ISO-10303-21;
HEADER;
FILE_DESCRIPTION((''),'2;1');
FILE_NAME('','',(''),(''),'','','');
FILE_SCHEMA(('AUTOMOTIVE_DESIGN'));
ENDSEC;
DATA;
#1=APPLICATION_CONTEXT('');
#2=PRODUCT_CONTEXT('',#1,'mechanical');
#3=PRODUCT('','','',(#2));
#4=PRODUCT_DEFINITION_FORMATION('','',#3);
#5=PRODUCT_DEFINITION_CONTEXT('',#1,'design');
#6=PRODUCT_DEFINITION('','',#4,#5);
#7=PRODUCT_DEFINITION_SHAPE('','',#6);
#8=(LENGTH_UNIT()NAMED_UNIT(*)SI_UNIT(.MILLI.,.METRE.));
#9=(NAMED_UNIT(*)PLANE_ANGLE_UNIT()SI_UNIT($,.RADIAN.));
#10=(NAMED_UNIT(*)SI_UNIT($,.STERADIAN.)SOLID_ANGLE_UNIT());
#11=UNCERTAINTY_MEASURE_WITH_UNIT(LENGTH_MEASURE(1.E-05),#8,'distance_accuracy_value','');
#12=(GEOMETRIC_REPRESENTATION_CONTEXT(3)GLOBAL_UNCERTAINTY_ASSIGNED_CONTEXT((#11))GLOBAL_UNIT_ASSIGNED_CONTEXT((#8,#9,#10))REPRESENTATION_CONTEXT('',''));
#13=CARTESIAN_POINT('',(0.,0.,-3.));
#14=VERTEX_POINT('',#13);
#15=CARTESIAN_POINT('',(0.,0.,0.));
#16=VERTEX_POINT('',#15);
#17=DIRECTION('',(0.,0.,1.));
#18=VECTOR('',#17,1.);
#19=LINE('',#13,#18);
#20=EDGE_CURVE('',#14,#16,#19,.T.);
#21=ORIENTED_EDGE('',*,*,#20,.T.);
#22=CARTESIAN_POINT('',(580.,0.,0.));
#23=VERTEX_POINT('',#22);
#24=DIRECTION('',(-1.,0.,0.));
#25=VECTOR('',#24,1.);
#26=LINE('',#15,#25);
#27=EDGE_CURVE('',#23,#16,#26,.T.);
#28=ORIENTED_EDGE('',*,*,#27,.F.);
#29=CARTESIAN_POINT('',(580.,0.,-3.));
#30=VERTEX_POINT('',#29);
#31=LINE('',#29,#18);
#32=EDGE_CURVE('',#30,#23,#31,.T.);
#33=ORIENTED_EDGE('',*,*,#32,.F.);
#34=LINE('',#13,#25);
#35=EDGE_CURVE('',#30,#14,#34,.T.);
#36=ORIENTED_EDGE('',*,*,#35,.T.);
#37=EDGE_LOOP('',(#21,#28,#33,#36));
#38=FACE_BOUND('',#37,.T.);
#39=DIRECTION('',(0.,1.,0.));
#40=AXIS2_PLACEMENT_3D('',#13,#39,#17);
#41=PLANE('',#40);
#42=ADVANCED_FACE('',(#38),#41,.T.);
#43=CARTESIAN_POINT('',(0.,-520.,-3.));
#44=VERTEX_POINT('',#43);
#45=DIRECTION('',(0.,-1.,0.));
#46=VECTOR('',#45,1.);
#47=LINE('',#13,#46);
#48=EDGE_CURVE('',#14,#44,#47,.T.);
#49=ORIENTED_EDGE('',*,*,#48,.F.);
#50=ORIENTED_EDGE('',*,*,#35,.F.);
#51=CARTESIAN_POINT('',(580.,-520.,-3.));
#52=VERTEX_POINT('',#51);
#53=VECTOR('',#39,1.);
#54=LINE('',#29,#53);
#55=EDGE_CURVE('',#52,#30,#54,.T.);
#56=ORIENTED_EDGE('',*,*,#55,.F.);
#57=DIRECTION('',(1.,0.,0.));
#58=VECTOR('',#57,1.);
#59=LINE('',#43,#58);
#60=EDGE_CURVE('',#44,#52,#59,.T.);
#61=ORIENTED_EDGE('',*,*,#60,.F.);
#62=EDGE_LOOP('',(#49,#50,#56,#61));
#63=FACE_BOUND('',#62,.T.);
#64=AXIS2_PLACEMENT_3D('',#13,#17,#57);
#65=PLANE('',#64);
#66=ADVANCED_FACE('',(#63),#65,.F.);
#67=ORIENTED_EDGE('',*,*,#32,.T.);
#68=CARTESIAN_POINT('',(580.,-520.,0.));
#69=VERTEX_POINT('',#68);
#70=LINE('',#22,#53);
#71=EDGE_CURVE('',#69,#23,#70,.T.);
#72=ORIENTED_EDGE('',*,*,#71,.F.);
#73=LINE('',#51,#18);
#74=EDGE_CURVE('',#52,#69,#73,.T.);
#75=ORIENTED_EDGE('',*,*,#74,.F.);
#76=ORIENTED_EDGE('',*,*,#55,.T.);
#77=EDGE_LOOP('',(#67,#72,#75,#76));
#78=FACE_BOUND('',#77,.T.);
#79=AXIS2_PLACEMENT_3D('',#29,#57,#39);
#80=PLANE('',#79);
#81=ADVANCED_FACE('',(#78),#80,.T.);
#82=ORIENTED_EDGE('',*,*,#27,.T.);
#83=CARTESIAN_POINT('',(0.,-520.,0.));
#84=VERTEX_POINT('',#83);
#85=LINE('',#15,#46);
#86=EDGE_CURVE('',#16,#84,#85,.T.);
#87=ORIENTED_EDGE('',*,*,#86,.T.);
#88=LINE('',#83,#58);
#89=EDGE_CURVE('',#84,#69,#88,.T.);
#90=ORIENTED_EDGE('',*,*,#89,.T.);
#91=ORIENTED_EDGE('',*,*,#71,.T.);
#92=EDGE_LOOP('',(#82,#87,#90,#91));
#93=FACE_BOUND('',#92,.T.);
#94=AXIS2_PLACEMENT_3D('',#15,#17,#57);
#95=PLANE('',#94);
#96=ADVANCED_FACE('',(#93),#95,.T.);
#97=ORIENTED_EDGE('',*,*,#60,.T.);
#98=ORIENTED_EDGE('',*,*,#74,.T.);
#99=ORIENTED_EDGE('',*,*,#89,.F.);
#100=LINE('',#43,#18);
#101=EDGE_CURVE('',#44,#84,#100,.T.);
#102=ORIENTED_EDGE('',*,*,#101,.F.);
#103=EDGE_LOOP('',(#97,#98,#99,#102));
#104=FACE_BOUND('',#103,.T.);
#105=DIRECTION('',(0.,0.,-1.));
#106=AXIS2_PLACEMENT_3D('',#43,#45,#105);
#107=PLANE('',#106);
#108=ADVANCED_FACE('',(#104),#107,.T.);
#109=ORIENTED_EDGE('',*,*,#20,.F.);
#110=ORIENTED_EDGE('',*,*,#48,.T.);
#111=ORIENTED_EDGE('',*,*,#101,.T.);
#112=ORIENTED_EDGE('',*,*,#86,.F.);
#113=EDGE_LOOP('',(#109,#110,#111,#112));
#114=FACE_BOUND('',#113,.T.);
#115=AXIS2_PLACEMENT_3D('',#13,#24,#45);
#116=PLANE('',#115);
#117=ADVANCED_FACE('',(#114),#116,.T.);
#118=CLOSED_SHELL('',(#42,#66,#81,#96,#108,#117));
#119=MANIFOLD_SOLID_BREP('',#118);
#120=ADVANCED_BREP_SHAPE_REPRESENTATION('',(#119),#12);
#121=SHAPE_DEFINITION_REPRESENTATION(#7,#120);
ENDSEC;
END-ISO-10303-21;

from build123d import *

# Parameters (mm, degrees)
IZIM1_W            = 580
IZIM1_H            = 520
TABAN_FLAN_1_DEPTH = 3


# Sheet-metal steps are written as plain solids
with BuildPart() as part:
    # Çizim1 → Taban-Flanş1 (new body)
    with BuildSketch(Plane.XY):
        with Locations((290, -260)):
            Rectangle(IZIM1_W, IZIM1_H)
    extrude(amount=-TABAN_FLAN_1_DEPTH)


solid = part.part
